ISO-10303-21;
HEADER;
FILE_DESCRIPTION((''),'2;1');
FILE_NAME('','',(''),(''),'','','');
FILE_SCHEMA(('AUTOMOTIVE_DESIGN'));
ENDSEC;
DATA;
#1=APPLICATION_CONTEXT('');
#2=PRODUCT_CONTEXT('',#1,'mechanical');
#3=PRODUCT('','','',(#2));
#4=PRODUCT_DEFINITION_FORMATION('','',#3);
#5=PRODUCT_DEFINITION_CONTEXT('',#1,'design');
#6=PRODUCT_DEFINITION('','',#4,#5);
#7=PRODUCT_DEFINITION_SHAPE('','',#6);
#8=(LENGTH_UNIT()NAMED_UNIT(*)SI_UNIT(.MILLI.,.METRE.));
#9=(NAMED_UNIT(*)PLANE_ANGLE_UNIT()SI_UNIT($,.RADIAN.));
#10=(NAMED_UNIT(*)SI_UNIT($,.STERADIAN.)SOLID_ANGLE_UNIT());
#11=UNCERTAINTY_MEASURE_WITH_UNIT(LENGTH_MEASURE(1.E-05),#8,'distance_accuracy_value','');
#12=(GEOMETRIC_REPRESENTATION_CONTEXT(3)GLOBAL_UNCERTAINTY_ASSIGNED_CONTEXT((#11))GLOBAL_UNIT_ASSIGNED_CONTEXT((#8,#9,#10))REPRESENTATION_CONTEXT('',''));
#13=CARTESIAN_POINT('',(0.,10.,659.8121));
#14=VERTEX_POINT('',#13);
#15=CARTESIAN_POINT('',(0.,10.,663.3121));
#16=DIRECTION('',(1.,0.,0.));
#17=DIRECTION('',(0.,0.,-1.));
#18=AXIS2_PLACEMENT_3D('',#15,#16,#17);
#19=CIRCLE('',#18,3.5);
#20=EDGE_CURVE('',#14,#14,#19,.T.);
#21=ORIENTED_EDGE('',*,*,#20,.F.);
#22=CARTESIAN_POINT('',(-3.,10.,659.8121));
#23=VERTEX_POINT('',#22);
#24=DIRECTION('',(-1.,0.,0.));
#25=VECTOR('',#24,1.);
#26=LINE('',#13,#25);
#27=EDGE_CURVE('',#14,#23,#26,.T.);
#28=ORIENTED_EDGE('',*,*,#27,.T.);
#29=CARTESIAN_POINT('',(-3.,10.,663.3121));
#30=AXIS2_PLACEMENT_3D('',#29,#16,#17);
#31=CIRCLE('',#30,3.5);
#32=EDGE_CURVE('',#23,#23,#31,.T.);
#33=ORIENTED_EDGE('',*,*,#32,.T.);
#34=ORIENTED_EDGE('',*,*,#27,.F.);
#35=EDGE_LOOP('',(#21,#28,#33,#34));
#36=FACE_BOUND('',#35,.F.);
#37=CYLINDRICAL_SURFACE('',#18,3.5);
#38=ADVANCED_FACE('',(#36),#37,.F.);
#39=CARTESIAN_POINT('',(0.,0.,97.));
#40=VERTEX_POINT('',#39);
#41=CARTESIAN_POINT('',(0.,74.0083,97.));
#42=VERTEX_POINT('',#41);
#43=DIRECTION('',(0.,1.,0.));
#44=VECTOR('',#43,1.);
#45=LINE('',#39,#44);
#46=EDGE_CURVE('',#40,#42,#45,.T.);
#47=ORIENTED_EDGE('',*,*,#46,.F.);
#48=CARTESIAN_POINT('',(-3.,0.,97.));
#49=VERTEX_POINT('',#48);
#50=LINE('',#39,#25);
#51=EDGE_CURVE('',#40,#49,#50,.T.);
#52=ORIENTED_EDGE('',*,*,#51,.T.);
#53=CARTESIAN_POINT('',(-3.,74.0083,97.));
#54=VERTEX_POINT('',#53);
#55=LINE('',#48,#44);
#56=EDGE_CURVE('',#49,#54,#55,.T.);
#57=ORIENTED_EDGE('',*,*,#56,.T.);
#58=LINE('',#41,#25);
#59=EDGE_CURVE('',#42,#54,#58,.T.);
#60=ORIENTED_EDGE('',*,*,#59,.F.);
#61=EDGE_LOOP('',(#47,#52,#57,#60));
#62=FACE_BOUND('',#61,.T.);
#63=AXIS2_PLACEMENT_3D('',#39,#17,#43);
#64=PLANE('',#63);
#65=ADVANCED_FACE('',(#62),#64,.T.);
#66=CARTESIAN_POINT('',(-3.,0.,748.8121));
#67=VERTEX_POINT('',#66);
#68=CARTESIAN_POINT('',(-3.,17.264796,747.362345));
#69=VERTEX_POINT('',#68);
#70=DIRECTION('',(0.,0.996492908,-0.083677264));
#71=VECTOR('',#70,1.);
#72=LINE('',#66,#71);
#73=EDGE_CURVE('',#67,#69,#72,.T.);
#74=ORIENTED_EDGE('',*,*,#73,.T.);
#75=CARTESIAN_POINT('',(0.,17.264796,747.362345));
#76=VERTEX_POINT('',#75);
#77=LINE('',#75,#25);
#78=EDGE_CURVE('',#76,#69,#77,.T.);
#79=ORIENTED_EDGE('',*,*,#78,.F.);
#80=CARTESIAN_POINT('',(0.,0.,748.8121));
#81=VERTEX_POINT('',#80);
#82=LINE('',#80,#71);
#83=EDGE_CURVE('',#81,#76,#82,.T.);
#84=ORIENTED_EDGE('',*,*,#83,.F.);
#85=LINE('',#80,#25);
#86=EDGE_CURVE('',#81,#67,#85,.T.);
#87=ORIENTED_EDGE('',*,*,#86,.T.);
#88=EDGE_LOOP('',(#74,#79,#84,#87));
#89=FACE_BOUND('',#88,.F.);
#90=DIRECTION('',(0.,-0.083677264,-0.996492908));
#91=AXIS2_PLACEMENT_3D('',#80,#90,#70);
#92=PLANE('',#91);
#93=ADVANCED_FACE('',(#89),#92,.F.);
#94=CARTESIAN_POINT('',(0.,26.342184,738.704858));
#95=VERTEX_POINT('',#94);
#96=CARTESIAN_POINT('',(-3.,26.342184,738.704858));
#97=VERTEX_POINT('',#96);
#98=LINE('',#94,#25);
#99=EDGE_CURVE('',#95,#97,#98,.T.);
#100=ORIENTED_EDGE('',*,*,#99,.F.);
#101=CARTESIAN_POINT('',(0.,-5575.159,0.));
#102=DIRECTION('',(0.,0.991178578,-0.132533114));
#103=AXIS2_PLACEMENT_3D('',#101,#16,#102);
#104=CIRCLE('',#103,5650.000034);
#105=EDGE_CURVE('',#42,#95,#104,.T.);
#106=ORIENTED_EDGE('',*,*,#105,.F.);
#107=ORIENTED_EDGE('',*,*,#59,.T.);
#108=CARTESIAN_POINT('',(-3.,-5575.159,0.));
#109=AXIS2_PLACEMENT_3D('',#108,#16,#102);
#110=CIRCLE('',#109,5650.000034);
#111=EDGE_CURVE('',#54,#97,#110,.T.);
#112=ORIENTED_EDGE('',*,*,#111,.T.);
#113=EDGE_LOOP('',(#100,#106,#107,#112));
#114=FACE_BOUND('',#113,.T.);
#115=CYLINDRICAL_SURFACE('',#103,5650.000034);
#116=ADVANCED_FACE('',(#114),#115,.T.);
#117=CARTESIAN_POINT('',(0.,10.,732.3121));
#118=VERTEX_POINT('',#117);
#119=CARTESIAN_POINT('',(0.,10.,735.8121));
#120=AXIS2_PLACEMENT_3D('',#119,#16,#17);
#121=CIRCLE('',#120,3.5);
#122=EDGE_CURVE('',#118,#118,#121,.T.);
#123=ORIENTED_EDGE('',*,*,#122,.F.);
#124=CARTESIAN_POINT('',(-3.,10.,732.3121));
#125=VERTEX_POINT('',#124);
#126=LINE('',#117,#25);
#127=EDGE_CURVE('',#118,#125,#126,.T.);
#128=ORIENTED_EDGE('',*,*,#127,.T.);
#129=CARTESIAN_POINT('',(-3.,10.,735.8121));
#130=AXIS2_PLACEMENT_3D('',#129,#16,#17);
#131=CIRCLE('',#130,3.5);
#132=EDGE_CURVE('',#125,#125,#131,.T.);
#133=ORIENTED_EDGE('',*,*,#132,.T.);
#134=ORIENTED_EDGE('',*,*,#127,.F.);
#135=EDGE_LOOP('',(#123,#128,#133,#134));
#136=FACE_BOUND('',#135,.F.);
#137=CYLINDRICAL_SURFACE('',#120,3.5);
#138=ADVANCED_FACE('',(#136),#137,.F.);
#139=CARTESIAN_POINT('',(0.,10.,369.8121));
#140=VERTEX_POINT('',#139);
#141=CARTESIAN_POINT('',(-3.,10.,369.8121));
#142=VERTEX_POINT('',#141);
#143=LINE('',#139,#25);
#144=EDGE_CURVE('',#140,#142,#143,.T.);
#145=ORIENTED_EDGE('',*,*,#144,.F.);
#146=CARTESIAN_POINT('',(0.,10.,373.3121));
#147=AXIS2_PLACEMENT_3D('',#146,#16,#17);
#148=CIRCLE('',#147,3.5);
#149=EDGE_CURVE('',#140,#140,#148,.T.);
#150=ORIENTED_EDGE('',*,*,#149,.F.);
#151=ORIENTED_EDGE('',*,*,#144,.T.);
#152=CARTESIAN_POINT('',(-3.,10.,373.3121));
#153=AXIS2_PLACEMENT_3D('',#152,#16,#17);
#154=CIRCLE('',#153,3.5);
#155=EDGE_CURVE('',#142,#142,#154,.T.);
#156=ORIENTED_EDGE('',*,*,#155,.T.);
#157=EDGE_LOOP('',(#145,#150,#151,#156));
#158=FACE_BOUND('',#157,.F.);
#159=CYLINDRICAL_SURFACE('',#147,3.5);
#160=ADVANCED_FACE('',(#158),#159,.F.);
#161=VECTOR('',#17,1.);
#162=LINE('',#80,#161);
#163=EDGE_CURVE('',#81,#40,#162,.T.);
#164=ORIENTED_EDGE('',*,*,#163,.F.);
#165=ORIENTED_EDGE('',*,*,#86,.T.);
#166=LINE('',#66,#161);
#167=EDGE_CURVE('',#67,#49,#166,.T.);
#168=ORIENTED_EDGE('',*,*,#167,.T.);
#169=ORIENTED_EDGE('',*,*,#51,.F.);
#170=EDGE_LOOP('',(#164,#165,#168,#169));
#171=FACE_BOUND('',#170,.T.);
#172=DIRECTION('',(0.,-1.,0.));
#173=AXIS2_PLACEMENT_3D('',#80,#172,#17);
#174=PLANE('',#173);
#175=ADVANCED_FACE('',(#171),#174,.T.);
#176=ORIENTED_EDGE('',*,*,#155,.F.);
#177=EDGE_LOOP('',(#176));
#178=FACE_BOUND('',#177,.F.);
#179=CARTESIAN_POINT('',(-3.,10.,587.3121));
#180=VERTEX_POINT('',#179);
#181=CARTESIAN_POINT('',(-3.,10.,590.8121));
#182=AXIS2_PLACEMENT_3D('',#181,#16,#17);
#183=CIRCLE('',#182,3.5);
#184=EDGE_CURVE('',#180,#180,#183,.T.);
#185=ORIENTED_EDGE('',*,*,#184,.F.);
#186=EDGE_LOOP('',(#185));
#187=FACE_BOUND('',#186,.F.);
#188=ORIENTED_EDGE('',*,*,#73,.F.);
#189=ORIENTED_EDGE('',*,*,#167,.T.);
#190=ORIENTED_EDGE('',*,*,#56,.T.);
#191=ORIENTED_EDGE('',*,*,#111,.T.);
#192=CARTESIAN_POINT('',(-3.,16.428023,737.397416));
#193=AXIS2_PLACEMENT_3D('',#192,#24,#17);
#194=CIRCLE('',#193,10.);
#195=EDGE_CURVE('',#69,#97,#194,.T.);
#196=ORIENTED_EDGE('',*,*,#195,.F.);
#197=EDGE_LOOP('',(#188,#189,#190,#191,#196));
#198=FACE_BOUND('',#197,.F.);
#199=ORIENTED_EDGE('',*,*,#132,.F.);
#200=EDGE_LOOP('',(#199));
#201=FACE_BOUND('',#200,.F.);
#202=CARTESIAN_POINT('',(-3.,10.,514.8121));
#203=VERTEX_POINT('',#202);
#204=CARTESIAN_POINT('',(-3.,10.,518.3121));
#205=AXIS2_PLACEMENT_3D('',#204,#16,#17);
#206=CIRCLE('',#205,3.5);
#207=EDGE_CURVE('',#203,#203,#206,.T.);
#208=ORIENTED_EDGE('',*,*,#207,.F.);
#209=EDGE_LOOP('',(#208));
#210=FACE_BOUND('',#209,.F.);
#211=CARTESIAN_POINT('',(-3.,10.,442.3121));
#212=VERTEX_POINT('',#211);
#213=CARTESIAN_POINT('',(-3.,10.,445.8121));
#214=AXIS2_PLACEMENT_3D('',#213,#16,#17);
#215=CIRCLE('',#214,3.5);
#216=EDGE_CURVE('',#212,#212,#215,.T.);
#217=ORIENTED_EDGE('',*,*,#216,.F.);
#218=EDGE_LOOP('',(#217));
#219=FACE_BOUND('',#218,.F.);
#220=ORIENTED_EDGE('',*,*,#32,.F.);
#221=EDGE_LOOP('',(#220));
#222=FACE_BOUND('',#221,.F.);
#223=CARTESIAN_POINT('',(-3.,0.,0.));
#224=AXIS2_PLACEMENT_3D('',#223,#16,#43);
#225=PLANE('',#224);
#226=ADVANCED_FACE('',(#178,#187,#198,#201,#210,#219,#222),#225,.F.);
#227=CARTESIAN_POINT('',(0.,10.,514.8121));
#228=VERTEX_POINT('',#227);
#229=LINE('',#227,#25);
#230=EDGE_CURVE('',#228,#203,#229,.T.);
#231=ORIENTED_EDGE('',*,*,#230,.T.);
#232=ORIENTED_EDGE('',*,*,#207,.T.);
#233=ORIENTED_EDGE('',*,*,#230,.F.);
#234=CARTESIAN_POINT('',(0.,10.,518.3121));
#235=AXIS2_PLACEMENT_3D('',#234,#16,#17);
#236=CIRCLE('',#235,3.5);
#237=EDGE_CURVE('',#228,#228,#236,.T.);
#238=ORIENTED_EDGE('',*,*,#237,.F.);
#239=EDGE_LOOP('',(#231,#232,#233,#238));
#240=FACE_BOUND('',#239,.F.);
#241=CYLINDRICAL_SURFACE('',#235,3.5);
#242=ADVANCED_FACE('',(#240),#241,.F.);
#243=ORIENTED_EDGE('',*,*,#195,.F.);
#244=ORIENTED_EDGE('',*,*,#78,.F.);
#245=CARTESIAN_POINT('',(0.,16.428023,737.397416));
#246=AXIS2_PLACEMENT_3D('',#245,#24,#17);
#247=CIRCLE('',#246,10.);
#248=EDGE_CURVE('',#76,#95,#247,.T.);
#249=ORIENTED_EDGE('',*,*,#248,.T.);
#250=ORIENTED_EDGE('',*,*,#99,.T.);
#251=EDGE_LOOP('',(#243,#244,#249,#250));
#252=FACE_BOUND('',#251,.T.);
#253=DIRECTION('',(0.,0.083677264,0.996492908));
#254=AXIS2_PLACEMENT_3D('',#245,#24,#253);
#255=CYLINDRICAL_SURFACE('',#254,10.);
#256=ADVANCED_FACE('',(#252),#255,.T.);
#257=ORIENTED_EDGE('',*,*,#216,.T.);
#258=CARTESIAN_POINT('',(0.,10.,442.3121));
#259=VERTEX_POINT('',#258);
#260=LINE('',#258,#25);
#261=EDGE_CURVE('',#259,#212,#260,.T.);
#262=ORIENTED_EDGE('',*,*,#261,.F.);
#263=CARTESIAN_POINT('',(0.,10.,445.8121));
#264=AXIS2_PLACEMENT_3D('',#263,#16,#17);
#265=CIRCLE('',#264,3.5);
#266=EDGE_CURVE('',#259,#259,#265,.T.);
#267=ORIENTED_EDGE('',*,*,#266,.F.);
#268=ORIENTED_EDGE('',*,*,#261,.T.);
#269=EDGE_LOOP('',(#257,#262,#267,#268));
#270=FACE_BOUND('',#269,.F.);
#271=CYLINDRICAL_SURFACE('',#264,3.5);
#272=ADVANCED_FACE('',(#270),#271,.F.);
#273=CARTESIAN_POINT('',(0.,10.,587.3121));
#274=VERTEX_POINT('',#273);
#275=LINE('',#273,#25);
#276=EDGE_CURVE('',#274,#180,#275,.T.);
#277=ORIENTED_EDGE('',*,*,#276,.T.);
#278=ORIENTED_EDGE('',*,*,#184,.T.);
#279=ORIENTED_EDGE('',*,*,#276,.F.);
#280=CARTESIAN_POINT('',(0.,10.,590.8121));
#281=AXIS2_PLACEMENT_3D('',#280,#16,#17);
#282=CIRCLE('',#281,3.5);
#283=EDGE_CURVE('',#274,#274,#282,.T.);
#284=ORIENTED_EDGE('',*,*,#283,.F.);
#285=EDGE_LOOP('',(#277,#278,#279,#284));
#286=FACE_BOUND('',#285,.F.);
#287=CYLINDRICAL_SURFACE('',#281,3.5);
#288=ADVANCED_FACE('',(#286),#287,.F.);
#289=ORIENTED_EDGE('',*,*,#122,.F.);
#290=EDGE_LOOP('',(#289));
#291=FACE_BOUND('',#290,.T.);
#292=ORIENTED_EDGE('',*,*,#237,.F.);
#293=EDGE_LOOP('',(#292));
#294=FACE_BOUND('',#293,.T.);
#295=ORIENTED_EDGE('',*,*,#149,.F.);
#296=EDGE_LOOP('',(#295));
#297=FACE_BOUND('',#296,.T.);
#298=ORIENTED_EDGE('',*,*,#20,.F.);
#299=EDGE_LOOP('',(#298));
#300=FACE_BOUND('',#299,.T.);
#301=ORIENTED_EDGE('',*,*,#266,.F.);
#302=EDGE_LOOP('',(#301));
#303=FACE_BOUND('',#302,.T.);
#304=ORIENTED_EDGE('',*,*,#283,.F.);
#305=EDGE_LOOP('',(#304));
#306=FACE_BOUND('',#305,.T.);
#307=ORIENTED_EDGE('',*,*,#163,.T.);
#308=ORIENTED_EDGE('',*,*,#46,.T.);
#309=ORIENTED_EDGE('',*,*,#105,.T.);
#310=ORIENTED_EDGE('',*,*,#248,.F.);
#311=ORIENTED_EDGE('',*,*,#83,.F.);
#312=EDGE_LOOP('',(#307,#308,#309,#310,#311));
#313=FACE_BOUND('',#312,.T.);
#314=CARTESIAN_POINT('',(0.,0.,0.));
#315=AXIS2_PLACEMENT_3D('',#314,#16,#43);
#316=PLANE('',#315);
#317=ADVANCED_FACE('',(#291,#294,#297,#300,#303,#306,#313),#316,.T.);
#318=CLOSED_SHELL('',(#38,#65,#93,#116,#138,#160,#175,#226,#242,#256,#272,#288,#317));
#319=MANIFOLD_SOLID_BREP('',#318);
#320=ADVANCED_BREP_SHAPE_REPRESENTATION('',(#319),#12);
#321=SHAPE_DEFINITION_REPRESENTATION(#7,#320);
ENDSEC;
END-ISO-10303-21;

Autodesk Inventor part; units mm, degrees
ref_plane "YZ Plane" through (0, 0, 0) normal (1, 0, 0) x (0, 1, 0)
ref_plane "XZ Plane" through (0, 0, 0) normal (0, 1, 0) x (-1, 0, 0)
ref_plane "XY Plane" through (0, 0, 0) normal (0, 0, 1) x (1, 0, 0)
sketch "Sketch1" plane through (0, 0, 0) normal (1, 0, 0) x (0, 1, 0)
  line L0 (25, 748.8121) -> (0, 748.8121)
  line L1 (0, 748.8121) -> (0, -748.8121)
  line L2 (0, -748.8121) -> (25, -748.8121)
  arc A0 (25, -748.8121) -> (25, 748.8121) centre (-5575.159, 0) ccw
  line L3 (0, 748.8121) -> (25.2835, 746.689)
  line L4 (0, -748.8121) -> (25.2835, -746.689)
  line L5 (0, 97) -> (74.0083, 97)
  point P0 (0, 0)
  point P1 (0, 0)
  dimension "d2" = 25
  dimension "d3" = 5650
  dimension "d7" = 85.2
  dimension "d8" = 85.2
  dimension "d33" = 97
  dimension "d34" = 651.812
extrude "Plate1" add sketch "Sketch1" against normal blind 3 contours L3 A0 L5 L1
fillet "Corner Round3" radius 10 1 edges at (-1.5, 25.2835, 746.689)
sketch "Sketch4" plane through (0, 0, 0) normal (1, 0, 0) x (0, 0, -1)
  circle A0 centre (-735.8121, 10) radius 3.5
  line L0 (-748.8121, 0) -> (-97, 0) projected
  point P0 (0, 0)
  dimension "d23" = 7
  dimension "d25" = 10
  dimension "d32" = 13
extrude "Extrusion1" cut sketch "Sketch4" against normal through all
pattern_linear "Rectangular Pattern2" count 6 spacing 72.5 along (0, 0, -1) of "Extrusion1"
equation "\"d4\" = Thickness"
equation "\"BendReliefWidth\" = Thickness"
equation "\"BendReliefDepth\" = 0.5 * Thickness"
equation "\"CornerReliefSize\" = 4 * Thickness"
equation "\"MinimumRemnant\" = 2 * Thickness"
equation "\"TransitionRadius\" = BendRadius"
equation "\"JacobiRadiusSize\" = BendRadius"
equation "\"GapSize\" = Thickness"
equation "\"Thickness\" = 3"
equation "\"BendRadius\" = 5"
properties part number "MSC 812 TOP SUPPORT GILLS" material "Stainless Steel"
